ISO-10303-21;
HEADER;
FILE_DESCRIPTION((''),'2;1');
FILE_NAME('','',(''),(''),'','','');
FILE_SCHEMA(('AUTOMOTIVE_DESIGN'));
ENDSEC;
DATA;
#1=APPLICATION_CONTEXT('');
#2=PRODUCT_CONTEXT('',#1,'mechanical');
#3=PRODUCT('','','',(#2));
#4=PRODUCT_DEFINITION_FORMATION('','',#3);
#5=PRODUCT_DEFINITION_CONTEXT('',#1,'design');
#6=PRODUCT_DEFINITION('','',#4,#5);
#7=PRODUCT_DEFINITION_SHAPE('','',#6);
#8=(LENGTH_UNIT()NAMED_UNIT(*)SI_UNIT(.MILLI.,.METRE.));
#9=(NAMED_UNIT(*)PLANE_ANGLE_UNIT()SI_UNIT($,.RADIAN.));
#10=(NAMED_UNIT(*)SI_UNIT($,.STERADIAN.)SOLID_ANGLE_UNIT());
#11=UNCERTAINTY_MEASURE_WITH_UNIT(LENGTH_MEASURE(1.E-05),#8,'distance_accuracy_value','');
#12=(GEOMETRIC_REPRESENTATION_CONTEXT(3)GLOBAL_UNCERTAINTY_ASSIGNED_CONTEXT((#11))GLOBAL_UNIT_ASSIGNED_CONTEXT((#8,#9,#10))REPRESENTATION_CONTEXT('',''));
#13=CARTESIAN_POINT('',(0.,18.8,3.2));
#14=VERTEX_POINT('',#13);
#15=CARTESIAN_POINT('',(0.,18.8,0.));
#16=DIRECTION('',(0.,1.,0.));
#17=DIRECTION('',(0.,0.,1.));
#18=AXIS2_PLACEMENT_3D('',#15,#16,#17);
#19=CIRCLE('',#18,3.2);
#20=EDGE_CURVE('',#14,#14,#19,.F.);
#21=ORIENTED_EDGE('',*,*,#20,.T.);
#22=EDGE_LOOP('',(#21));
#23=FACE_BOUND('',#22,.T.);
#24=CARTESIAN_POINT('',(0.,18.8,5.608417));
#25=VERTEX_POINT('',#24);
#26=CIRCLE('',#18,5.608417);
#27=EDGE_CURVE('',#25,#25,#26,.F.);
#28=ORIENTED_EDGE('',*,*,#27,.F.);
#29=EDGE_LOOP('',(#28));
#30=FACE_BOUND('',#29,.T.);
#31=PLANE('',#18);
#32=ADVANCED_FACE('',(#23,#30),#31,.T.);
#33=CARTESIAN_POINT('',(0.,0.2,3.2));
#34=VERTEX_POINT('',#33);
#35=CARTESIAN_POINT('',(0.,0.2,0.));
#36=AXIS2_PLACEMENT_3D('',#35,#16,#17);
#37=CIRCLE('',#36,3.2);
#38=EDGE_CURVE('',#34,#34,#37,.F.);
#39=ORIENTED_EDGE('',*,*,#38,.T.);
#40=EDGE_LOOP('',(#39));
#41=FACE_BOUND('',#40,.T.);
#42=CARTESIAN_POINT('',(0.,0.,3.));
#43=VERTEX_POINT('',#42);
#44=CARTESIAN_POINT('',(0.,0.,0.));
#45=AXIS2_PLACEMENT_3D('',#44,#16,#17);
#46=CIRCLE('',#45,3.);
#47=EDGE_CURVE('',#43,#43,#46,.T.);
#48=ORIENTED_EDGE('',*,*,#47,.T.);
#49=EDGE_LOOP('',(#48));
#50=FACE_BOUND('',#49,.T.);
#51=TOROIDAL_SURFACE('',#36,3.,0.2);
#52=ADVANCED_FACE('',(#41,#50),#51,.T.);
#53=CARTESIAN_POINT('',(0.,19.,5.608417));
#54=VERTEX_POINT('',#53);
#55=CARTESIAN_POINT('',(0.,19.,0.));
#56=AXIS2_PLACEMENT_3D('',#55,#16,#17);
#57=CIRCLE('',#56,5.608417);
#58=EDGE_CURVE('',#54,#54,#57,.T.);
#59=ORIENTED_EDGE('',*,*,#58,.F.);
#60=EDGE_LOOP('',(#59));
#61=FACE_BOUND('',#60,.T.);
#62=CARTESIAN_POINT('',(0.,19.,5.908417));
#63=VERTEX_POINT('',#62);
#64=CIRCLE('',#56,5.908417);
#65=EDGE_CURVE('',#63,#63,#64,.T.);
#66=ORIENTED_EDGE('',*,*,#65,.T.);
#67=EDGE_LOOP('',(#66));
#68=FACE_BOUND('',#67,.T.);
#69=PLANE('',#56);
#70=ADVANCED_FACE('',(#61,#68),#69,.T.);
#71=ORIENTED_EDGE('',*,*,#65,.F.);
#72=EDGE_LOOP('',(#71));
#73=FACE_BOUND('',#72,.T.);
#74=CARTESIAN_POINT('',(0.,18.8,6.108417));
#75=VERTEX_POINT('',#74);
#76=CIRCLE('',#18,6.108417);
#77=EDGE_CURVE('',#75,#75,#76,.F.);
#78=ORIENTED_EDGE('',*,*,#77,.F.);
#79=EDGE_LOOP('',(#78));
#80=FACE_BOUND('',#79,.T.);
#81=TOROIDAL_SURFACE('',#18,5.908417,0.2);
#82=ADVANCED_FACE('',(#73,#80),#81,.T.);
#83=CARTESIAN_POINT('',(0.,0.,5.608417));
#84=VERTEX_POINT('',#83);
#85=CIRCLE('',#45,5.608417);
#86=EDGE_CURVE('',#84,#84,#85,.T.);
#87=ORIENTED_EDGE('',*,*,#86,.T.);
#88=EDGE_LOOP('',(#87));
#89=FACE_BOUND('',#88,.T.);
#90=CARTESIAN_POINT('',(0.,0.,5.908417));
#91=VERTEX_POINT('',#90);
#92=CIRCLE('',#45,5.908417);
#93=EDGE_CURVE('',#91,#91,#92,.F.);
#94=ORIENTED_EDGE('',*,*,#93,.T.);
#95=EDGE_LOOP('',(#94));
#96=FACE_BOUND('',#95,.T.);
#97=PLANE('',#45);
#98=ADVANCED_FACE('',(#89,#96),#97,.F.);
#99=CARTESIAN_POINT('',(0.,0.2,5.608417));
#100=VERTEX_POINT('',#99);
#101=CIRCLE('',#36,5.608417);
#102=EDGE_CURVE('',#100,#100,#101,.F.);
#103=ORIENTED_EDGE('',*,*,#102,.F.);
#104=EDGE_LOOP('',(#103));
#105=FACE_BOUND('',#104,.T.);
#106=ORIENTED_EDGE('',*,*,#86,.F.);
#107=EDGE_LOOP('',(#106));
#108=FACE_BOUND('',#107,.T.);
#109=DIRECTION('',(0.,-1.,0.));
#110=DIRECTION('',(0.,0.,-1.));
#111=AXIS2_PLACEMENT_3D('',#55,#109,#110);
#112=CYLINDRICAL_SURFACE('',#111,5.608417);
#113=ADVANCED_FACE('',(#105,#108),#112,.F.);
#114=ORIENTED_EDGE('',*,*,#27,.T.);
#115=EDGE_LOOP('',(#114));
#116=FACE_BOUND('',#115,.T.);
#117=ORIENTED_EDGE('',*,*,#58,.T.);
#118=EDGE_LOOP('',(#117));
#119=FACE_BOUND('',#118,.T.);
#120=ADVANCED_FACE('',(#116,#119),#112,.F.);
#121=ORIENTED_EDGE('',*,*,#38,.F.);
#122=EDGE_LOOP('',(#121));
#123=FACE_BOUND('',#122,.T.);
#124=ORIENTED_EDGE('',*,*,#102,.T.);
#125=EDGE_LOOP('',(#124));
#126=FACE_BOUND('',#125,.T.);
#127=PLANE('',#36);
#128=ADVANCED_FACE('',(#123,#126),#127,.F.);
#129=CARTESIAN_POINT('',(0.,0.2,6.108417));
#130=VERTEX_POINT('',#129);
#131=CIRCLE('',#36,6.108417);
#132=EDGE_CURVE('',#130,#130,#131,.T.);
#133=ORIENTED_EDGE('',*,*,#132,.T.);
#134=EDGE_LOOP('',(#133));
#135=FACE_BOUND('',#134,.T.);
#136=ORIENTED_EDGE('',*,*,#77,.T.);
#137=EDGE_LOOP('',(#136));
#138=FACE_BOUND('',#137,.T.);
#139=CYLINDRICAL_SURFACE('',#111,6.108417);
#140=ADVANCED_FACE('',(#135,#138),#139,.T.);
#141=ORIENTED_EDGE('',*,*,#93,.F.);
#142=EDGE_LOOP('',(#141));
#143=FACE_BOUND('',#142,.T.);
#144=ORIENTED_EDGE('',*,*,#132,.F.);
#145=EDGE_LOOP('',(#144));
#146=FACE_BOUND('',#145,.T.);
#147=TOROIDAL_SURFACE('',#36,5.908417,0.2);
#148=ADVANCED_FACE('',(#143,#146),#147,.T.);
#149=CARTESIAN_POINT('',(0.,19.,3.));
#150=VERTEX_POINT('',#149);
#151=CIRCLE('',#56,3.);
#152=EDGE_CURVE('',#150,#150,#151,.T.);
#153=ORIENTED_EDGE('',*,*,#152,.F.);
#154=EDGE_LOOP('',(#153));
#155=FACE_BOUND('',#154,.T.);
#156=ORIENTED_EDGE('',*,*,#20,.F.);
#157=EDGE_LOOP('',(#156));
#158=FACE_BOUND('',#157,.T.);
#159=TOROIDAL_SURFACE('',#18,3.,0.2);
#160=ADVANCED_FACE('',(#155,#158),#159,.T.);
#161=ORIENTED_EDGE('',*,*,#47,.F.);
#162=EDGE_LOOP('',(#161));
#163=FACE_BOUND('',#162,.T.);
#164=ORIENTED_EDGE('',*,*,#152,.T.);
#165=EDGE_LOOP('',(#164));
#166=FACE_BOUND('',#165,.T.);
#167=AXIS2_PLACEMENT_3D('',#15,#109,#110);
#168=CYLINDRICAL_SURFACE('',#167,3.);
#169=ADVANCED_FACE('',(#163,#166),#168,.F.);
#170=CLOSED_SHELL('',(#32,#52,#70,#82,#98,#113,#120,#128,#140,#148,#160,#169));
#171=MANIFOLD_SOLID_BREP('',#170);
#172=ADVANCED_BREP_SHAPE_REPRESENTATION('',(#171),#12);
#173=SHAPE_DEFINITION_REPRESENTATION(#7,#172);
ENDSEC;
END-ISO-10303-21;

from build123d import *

# Parameters (mm, degrees)
EXTRUDE_START   = 0.2
SKETCH_1_R      = 6
SKETCH_1_R_2    = 3
EXTRUDE_1_DEPTH = 18.6
SKETCH_2_R      = 6.108417227
SKETCH_2_R_2    = 5.608417227
SKETCH_2_R_3    = 3.2
SKETCH_2_R_4    = 3
EXTRUDE_2_DEPTH = 19
FILLET_1_R      = 0.2


with BuildPart() as part:
    # 草图1 → 凸台-拉伸1 (new body)
    with BuildSketch(Plane(origin=(0, 0, 0), x_dir=(1, 0, 0), z_dir=(0, 1, 0)).offset(EXTRUDE_START)):
        with Locations(Location((0, 0, 0), (0, 0, 270))):
            Circle(SKETCH_1_R)
        with Locations(Location((0, 0, 0), (0, 0, 270))):
            Circle(SKETCH_1_R_2, mode=Mode.SUBTRACT)
    extrude(amount=EXTRUDE_1_DEPTH)

    # 草图2 → 凸台-拉伸2 (add)
    # profile 1 of 2: a face of its own
    with BuildSketch(Plane(origin=(0, 0, 0), x_dir=(1, 0, 0), z_dir=(0, 1, 0))):
        with Locations(Location((0, 0, 0), (0, 0, 270))):
            Circle(SKETCH_2_R)
        with Locations(Location((0, 0, 0), (0, 0, 270))):
            Circle(SKETCH_2_R_2, mode=Mode.SUBTRACT)
    # profile 2 of 2: a face of its own
    with BuildSketch(Plane(origin=(0, 0, 0), x_dir=(1, 0, 0), z_dir=(0, 1, 0))):
        with Locations(Location((0, 0, 0), (0, 0, 270))):
            Circle(SKETCH_2_R_3)
        with Locations(Location((0, 0, 0), (0, 0, 270))):
            Circle(SKETCH_2_R_4, mode=Mode.SUBTRACT)
    extrude(amount=EXTRUDE_2_DEPTH)

    # 圆角1
    fillet_1_edges = [part.edges().sort_by_distance(p)[0] for p in [
        (0, 0, -6.108417227),
        (0, 19, -6.108417227),
        (0, 0, -3.2),
        (0, 19, -3.2),
    ]]
    fillet(fillet_1_edges, radius=FILLET_1_R - 0.0001)  # a hair under: the kernel refuses the full size


solid = part.part
